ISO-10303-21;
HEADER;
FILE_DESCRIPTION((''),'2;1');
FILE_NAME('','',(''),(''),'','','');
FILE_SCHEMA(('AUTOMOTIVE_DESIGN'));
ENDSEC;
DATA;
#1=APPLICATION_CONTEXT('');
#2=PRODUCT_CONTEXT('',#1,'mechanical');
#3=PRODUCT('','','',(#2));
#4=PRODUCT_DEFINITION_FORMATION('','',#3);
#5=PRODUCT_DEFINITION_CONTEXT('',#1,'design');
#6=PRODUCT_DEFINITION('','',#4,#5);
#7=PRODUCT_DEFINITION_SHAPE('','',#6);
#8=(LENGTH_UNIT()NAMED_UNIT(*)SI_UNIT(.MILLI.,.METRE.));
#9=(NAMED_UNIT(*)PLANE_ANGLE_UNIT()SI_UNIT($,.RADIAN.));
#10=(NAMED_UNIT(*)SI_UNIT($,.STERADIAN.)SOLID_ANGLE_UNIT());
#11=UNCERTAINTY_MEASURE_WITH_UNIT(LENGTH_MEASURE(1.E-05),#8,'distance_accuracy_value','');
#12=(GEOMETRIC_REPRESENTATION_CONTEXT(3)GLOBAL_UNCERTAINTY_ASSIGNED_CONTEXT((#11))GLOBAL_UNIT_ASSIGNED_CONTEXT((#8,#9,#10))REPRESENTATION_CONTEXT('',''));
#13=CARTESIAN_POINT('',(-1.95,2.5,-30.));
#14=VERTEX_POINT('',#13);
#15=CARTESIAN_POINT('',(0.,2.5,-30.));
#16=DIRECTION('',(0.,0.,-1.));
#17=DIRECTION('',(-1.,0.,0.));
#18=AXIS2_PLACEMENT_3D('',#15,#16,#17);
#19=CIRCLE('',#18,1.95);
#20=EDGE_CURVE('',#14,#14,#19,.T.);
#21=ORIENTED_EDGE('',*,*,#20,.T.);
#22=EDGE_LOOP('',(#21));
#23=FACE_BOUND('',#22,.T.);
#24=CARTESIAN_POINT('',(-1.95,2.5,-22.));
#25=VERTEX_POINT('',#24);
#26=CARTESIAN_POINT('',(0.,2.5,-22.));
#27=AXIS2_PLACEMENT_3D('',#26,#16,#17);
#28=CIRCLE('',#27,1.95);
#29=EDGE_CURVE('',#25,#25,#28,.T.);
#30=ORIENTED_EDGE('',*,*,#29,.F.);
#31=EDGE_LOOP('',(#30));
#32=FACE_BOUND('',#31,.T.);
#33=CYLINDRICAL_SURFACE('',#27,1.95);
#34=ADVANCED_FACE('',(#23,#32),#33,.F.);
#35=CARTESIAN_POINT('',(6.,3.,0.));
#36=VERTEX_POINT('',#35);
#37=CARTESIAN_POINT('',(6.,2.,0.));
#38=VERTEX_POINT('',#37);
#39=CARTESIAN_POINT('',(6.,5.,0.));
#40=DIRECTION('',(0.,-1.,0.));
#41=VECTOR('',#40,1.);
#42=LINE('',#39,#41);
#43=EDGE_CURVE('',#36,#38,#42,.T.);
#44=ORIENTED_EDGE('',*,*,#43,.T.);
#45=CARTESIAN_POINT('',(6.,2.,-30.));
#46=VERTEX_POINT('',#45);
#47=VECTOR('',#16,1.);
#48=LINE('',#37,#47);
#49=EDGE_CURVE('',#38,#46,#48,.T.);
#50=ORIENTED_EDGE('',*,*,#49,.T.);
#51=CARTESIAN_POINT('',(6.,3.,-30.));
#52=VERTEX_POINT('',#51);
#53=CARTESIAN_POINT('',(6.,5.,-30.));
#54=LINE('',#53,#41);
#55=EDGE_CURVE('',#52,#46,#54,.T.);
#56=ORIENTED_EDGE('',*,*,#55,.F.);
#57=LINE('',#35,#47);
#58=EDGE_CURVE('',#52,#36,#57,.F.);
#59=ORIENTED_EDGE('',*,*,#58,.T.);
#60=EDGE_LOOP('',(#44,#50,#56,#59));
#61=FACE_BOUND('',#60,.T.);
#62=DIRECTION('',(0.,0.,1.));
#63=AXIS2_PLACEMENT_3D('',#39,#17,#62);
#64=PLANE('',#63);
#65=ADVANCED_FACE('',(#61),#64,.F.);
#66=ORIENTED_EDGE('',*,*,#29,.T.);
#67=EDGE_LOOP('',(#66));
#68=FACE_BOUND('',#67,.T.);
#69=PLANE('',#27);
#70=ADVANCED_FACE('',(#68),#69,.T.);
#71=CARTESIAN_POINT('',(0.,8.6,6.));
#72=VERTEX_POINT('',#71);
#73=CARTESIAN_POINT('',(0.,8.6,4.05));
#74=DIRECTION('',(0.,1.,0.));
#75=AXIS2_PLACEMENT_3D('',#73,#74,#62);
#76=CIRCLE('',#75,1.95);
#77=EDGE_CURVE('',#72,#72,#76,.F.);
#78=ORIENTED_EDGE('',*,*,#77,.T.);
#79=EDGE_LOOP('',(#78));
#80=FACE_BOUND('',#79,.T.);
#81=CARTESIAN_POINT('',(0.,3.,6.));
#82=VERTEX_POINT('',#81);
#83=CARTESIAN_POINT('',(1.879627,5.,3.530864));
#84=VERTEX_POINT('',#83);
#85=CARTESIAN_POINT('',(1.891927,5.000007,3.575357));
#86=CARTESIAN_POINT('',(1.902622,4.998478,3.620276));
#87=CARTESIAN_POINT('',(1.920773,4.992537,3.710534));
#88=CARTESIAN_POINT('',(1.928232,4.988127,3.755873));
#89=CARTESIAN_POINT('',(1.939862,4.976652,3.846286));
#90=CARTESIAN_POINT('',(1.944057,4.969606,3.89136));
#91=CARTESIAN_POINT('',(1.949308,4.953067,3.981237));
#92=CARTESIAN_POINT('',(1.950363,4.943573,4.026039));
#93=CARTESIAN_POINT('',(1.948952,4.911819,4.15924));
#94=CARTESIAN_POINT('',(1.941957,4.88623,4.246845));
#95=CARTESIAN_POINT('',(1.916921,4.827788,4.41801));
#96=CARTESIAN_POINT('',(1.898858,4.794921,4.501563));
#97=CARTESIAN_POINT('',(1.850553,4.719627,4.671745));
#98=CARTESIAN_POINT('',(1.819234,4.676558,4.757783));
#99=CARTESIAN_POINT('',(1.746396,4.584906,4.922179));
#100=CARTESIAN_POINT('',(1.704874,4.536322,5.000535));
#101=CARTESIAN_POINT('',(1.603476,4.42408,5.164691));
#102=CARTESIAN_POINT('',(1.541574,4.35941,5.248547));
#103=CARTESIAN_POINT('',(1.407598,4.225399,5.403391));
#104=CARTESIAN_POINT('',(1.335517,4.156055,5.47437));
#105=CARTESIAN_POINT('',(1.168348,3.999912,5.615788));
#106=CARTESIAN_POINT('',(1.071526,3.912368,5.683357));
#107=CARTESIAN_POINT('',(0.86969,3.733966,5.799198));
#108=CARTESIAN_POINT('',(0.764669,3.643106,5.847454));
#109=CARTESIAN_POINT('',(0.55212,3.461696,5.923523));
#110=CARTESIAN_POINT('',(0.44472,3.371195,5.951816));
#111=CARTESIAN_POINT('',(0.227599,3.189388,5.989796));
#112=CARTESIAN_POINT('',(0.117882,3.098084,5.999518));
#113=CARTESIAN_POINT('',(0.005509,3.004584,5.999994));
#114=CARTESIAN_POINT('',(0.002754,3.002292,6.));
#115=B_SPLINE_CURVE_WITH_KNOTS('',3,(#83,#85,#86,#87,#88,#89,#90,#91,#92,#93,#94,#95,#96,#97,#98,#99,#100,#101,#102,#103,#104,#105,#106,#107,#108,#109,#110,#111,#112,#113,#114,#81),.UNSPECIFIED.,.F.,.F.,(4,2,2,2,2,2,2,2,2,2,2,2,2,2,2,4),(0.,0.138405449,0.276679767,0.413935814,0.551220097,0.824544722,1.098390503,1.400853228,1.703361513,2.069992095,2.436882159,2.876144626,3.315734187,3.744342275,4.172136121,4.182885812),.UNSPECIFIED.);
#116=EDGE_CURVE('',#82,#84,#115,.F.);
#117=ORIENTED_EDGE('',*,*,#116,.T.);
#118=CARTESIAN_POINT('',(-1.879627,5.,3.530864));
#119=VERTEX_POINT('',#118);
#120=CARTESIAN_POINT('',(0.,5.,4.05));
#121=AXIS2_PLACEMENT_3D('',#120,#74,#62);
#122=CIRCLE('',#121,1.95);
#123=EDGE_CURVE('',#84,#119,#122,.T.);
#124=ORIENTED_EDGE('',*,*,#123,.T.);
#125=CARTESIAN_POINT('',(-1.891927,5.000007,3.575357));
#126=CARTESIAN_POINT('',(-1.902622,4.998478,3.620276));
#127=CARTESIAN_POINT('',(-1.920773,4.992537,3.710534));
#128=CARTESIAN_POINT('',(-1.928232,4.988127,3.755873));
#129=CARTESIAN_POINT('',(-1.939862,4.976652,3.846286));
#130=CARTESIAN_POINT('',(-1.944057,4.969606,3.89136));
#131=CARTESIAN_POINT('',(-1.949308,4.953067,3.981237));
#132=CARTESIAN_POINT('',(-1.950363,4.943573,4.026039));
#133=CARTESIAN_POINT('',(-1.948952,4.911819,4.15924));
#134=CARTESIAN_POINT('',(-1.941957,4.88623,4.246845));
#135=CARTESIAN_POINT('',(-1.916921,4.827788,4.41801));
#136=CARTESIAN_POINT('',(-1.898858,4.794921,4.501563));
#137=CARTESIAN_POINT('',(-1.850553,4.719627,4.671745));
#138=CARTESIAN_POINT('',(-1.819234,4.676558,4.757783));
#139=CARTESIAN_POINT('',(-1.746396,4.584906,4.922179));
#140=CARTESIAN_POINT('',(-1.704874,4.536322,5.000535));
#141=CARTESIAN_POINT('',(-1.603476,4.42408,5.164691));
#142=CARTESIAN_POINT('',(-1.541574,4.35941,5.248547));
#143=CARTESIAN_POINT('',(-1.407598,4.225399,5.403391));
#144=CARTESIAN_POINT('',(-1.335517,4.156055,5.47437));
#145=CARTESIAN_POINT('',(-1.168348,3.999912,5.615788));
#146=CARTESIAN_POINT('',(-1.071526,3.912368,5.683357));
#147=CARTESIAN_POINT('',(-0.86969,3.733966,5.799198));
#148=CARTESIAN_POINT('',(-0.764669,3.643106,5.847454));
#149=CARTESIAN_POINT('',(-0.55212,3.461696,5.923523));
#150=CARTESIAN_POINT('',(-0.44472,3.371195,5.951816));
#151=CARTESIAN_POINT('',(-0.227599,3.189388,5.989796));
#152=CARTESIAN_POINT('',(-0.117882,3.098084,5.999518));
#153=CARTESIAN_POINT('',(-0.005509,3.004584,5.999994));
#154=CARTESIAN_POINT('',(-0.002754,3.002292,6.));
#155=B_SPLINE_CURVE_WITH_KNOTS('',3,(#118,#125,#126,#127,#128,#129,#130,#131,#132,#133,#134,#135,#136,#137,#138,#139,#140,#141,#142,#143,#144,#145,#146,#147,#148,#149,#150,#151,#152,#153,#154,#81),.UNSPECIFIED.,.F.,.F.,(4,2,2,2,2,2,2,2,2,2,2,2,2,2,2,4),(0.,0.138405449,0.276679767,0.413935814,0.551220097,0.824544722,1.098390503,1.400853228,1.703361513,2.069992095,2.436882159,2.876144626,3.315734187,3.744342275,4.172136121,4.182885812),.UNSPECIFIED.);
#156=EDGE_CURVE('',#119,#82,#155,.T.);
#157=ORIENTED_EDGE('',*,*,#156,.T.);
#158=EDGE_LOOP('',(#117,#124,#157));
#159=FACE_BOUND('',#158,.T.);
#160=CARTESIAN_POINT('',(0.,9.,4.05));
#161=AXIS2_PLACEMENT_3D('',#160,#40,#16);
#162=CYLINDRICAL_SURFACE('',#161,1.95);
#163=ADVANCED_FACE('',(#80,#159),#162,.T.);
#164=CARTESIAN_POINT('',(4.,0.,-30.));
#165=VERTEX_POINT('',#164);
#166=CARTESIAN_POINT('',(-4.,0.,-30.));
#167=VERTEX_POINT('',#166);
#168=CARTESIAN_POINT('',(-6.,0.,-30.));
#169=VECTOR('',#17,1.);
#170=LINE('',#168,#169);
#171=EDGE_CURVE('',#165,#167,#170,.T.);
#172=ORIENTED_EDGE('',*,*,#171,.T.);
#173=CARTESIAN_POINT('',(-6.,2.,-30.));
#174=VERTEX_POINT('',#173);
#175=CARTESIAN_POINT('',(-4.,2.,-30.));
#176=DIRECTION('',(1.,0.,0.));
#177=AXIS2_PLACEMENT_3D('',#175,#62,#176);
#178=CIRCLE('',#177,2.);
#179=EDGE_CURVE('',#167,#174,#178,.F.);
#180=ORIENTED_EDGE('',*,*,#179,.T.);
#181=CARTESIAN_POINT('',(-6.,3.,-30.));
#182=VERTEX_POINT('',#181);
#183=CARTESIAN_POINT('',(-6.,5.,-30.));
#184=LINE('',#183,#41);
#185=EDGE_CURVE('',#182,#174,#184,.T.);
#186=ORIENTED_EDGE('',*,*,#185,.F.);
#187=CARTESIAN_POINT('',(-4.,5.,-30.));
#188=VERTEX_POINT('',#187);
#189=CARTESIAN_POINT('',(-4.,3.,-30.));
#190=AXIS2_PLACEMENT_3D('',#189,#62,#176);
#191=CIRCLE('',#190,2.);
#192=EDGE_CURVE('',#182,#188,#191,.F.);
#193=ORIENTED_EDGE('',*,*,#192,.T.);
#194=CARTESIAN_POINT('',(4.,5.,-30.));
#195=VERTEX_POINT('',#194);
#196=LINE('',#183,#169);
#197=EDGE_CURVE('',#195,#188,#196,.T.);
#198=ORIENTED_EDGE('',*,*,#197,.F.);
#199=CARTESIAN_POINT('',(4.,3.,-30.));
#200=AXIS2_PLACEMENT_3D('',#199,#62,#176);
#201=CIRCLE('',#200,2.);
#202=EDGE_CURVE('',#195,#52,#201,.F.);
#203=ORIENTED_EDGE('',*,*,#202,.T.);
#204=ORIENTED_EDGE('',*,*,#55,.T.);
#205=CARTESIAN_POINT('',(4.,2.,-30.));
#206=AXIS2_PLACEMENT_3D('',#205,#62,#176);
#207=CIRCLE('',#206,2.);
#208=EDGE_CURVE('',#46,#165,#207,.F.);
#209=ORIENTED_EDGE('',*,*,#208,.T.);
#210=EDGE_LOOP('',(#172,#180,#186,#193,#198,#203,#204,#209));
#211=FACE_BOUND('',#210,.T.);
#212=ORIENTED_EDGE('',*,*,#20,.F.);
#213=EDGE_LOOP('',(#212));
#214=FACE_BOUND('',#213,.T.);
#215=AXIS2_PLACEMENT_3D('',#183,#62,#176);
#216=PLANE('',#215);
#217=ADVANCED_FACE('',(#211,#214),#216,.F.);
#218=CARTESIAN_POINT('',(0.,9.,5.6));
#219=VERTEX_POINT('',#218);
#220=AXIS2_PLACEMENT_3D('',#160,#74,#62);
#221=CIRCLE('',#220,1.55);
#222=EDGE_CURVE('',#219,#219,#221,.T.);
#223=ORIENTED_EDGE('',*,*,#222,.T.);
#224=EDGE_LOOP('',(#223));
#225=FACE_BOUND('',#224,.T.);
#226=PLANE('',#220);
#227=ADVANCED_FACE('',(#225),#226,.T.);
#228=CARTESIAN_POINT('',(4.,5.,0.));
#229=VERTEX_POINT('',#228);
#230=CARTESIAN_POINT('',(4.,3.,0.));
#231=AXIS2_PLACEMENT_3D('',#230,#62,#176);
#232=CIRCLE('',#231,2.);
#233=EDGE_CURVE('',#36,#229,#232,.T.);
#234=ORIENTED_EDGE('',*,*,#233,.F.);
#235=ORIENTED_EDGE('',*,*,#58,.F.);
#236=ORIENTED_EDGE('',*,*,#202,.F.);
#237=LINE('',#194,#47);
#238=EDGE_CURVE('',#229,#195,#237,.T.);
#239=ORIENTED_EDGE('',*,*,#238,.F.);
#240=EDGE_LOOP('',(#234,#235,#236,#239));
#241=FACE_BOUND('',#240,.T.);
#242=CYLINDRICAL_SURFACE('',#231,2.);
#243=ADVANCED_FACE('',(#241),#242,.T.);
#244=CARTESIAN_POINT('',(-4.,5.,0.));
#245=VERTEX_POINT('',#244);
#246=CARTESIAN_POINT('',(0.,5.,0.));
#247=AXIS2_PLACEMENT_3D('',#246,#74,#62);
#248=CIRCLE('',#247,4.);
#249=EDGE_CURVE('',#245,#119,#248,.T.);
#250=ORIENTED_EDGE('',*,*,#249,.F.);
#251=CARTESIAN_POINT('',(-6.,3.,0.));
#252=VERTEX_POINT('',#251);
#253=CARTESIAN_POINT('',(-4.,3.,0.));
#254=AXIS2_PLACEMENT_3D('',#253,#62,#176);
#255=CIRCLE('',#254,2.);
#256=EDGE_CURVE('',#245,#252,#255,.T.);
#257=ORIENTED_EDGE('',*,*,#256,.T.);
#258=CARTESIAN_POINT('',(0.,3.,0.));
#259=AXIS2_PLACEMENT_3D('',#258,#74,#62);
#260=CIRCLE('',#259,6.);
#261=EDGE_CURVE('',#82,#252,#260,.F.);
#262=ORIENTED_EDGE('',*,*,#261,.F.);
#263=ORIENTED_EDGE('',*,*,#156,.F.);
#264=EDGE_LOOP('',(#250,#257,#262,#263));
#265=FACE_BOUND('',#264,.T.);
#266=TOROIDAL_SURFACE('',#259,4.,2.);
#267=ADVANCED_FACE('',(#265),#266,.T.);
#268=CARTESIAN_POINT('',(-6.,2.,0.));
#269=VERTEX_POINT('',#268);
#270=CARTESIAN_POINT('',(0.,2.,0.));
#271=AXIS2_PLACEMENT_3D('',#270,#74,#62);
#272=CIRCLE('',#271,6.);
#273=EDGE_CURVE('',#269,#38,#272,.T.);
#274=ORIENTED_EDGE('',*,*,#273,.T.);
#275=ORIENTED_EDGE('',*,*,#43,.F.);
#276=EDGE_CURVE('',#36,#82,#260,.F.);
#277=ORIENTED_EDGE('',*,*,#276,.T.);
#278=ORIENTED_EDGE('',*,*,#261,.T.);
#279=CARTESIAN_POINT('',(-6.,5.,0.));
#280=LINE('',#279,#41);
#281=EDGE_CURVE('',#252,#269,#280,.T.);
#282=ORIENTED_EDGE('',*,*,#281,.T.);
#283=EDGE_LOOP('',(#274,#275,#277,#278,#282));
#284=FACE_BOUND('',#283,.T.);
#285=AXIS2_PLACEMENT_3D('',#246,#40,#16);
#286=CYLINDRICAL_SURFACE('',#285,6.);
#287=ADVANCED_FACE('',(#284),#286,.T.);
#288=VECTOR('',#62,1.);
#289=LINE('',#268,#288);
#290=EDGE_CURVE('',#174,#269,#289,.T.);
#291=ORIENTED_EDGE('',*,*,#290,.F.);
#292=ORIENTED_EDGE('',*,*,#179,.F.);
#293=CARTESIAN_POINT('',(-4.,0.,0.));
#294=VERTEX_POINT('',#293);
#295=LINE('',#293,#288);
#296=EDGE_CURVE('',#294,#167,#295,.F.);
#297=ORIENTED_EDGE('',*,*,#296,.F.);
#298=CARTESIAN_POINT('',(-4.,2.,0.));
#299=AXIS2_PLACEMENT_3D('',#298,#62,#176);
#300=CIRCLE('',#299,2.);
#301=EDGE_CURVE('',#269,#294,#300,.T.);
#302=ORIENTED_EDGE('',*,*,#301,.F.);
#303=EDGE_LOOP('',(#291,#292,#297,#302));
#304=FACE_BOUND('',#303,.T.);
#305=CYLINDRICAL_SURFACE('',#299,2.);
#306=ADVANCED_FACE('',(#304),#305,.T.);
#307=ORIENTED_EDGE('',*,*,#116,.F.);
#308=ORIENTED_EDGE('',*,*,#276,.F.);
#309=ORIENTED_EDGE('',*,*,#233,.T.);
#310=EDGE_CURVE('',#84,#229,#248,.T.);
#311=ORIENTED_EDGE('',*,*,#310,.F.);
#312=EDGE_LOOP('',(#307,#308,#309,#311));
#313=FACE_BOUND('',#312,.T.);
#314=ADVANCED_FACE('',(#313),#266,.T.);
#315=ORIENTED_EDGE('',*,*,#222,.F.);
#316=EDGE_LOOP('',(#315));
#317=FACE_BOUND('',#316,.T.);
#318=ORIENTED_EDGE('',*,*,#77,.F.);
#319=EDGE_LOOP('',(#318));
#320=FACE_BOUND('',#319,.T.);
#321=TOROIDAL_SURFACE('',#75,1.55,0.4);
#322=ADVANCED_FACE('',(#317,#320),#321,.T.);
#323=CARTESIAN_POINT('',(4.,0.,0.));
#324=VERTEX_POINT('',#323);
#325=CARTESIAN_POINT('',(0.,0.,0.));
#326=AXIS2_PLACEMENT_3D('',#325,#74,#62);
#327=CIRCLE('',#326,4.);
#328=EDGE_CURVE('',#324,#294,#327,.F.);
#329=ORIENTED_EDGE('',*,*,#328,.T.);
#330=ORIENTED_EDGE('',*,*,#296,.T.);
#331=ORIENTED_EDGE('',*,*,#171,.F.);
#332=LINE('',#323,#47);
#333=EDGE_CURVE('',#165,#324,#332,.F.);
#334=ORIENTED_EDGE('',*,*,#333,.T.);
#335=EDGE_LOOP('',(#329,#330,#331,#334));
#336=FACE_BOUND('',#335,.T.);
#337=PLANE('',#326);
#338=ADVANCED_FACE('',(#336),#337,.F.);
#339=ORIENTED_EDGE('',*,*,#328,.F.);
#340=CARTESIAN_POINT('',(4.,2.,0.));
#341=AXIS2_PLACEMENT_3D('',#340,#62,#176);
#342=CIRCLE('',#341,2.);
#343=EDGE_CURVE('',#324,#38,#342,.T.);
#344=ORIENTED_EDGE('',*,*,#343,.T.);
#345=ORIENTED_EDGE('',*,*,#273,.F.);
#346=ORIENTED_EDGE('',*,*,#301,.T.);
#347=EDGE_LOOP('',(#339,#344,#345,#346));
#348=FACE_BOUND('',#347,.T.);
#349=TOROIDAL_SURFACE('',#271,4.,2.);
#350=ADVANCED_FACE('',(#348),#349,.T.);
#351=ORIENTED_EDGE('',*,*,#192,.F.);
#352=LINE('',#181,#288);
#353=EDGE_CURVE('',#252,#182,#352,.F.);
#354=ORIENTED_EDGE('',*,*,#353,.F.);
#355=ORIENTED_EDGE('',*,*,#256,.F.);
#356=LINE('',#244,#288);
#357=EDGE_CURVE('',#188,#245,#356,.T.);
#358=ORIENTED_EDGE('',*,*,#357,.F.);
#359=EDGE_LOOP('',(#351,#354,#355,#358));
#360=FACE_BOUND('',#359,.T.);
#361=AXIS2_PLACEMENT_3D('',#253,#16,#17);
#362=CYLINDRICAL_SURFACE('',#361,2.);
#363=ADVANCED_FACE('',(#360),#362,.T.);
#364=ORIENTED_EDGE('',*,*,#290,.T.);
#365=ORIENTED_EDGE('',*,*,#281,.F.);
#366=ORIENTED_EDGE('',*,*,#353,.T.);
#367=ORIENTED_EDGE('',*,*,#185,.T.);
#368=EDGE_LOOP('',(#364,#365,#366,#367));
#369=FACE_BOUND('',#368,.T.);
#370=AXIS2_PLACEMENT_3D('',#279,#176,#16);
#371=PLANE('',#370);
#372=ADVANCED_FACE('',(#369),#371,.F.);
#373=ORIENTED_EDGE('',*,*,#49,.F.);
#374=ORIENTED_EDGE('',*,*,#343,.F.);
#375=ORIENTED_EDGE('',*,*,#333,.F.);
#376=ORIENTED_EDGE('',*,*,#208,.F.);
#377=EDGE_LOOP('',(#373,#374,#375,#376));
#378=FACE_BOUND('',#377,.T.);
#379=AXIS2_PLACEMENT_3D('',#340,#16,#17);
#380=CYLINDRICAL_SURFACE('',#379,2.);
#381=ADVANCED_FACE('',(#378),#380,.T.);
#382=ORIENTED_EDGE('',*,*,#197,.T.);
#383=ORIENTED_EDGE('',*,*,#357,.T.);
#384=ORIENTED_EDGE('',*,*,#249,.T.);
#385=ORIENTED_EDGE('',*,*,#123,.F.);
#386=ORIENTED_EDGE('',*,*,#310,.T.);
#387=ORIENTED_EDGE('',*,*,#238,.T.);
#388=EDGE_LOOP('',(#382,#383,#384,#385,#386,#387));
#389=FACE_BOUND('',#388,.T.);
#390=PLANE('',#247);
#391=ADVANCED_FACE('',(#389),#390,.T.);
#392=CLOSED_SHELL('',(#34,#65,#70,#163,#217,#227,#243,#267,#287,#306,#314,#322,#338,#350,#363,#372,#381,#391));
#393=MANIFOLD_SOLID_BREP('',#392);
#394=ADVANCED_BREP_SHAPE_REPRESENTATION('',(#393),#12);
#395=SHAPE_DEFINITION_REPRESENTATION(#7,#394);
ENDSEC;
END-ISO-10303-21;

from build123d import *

# Parameters (mm, degrees)
BOSS_EXTRUDE1_DEPTH = 5
SKETCH2_R           = 1.95
CUT_EXTRUDE1_DEPTH  = 8
SKETCH3_R           = 1.95
BOSS_EXTRUDE2_DEPTH = 4
FILLET2_START       = -1e-07
FILLET2_OUTLINE_W   = 12
FILLET2_OUTLINE_H   = 5
FILLET2_DEPTH       = 6.0000001
FILLET2_START_2     = -31
FILLET2_2_DEPTH     = 32.804913921
FILLET2_START_3     = 2
FILLET2_3_DEPTH     = 0.9999999
FILLET2_4_OUTLINE_R = 1.95
FILLET2_4_DEPTH     = 3
FILLET3_R           = 0.4


with BuildPart() as part:
    # Sketch1 → Boss-Extrude1 (new body)
    with BuildSketch(Plane(origin=(0, 0, 0), x_dir=(1, 0, 0), z_dir=(0, 1, 0))):
        with BuildLine():
            Line((-6, 0), (-6, 30))
            Line((-6, 30), (6, 30))
            Line((6, 30), (6, 0))
            ThreePointArc((6, 0), (0, -6), (-6, 0))
        make_face()
    extrude(amount=BOSS_EXTRUDE1_DEPTH)

    # Sketch2 → Cut-Extrude1 (cut)
    with BuildSketch(Plane(origin=(0, 0, -30), x_dir=(-1, 0, 0), z_dir=(0, 0, -1))):
        with Locations((0, 2.5)):
            Circle(SKETCH2_R)
    extrude(amount=-CUT_EXTRUDE1_DEPTH, mode=Mode.SUBTRACT)

    # Sketch3 → Boss-Extrude2 (add)
    with BuildSketch(Plane(origin=(0, 5, 0), x_dir=(1, 0, 0), z_dir=(0, 1, 0))):
        with Locations(Location((0, -4.05, 0), (0, 0, 269.999293734))):
            Circle(SKETCH3_R)
    extrude(amount=BOSS_EXTRUDE2_DEPTH)

    # Fillet2: read off the stored shape, not the designer's step
    # Fillet2 outline → Fillet2 (cut)
    with BuildSketch(Plane.XY.offset(FILLET2_START)):
        with Locations((0, 2.5)):
            Rectangle(FILLET2_OUTLINE_W, FILLET2_OUTLINE_H)
    extrude(amount=FILLET2_DEPTH, mode=Mode.SUBTRACT)

    # Fillet2 2 outline → Fillet2 2 (cut)
    with BuildSketch(Plane.XY.offset(FILLET2_START_2)):
        with BuildLine():
            ThreePointArc((-4, 0), (-5.414213562, 0.585786438), (-6, 2))
            Line((-6, 2), (-6, 0))
            Line((-6, 0), (-4, 0))
        make_face()
        with BuildLine():
            Line((-6, 5), (-6, 3))
            ThreePointArc((-6, 3), (-5.414213562, 4.414213562), (-4, 5))
            Line((-4, 5), (-6, 5))
        make_face()
        with BuildLine():
            ThreePointArc((6, 2), (5.414213562, 0.585786438), (4, 0))
            Line((4, 0), (6, 0))
            Line((6, 0), (6, 2))
        make_face()
        with BuildLine():
            Line((6, 5), (4, 5))
            ThreePointArc((4, 5), (5.414213562, 4.414213562), (6, 3))
            Line((6, 3), (6, 5))
        make_face()
    extrude(amount=FILLET2_2_DEPTH, mode=Mode.SUBTRACT)

    # Fillet2 3 outline → Fillet2 3 (add)
    with BuildSketch(Plane(origin=(0, 0, 0), x_dir=(1, 0, 0), z_dir=(0, 1, 0)).offset(FILLET2_START_3)):
        with BuildLine():
            Line((6, 5e-08), (-6, 5e-08))
            ThreePointArc((-6, 5e-08), (0, -6), (6, 5e-08))
        make_face()
    extrude(amount=FILLET2_3_DEPTH)

    # Fillet2 4 outline → Fillet2 4 (add)
    with BuildSketch(Plane(origin=(0, 0, 0), x_dir=(1, 0, 0), z_dir=(0, 1, 0)).offset(FILLET2_START_3)):
        with Locations((0, -4.05)):
            Circle(FILLET2_4_OUTLINE_R)
    extrude(amount=FILLET2_4_DEPTH)

    # Fillet2 5 outline → Fillet2 5 (revolve)
    with BuildSketch(Plane.XY):
        with BuildLine():
            Line((4, 5), (0, 5))
            Line((0, 5), (0, 2.9999999))
            Line((0, 2.9999999), (6, 3))
            ThreePointArc((6, 3), (5.414213562, 4.414213562), (4, 5))
        make_face()
        with BuildLine():
            Line((0, 2), (0, 0))
            Line((0, 0), (4, 0))
            ThreePointArc((4, 0), (5.414213562, 0.585786438), (6, 2))
            Line((6, 2), (0, 2))
        make_face()
    revolve(axis=Axis((0, 0, 0), (0, 1, 0)))

    # Fillet3
    # the kernel refuses this fillet: 0.4 mm, written as the material it takes off along each edge
    with BuildSketch(Plane(origin=(0, 9, 4.05), x_dir=(-1.2326667094924345e-05, 0, 0.9999999999240267), z_dir=(-0.9999999999240267, 0, -1.2326667094924345e-05))) as fillet3_piece_1:
        with BuildLine():
            CenterArc((1.95 - FILLET3_R, -FILLET3_R), FILLET3_R, 0, 90)
            Line((1.95 - FILLET3_R, 0), (1.95, 0))
            Line((1.95, 0), (1.95, -FILLET3_R))
        make_face()
    revolve(axis=Axis((0, 9, 4.05), (0, 1, 0)), mode=Mode.SUBTRACT)


solid = part.part
